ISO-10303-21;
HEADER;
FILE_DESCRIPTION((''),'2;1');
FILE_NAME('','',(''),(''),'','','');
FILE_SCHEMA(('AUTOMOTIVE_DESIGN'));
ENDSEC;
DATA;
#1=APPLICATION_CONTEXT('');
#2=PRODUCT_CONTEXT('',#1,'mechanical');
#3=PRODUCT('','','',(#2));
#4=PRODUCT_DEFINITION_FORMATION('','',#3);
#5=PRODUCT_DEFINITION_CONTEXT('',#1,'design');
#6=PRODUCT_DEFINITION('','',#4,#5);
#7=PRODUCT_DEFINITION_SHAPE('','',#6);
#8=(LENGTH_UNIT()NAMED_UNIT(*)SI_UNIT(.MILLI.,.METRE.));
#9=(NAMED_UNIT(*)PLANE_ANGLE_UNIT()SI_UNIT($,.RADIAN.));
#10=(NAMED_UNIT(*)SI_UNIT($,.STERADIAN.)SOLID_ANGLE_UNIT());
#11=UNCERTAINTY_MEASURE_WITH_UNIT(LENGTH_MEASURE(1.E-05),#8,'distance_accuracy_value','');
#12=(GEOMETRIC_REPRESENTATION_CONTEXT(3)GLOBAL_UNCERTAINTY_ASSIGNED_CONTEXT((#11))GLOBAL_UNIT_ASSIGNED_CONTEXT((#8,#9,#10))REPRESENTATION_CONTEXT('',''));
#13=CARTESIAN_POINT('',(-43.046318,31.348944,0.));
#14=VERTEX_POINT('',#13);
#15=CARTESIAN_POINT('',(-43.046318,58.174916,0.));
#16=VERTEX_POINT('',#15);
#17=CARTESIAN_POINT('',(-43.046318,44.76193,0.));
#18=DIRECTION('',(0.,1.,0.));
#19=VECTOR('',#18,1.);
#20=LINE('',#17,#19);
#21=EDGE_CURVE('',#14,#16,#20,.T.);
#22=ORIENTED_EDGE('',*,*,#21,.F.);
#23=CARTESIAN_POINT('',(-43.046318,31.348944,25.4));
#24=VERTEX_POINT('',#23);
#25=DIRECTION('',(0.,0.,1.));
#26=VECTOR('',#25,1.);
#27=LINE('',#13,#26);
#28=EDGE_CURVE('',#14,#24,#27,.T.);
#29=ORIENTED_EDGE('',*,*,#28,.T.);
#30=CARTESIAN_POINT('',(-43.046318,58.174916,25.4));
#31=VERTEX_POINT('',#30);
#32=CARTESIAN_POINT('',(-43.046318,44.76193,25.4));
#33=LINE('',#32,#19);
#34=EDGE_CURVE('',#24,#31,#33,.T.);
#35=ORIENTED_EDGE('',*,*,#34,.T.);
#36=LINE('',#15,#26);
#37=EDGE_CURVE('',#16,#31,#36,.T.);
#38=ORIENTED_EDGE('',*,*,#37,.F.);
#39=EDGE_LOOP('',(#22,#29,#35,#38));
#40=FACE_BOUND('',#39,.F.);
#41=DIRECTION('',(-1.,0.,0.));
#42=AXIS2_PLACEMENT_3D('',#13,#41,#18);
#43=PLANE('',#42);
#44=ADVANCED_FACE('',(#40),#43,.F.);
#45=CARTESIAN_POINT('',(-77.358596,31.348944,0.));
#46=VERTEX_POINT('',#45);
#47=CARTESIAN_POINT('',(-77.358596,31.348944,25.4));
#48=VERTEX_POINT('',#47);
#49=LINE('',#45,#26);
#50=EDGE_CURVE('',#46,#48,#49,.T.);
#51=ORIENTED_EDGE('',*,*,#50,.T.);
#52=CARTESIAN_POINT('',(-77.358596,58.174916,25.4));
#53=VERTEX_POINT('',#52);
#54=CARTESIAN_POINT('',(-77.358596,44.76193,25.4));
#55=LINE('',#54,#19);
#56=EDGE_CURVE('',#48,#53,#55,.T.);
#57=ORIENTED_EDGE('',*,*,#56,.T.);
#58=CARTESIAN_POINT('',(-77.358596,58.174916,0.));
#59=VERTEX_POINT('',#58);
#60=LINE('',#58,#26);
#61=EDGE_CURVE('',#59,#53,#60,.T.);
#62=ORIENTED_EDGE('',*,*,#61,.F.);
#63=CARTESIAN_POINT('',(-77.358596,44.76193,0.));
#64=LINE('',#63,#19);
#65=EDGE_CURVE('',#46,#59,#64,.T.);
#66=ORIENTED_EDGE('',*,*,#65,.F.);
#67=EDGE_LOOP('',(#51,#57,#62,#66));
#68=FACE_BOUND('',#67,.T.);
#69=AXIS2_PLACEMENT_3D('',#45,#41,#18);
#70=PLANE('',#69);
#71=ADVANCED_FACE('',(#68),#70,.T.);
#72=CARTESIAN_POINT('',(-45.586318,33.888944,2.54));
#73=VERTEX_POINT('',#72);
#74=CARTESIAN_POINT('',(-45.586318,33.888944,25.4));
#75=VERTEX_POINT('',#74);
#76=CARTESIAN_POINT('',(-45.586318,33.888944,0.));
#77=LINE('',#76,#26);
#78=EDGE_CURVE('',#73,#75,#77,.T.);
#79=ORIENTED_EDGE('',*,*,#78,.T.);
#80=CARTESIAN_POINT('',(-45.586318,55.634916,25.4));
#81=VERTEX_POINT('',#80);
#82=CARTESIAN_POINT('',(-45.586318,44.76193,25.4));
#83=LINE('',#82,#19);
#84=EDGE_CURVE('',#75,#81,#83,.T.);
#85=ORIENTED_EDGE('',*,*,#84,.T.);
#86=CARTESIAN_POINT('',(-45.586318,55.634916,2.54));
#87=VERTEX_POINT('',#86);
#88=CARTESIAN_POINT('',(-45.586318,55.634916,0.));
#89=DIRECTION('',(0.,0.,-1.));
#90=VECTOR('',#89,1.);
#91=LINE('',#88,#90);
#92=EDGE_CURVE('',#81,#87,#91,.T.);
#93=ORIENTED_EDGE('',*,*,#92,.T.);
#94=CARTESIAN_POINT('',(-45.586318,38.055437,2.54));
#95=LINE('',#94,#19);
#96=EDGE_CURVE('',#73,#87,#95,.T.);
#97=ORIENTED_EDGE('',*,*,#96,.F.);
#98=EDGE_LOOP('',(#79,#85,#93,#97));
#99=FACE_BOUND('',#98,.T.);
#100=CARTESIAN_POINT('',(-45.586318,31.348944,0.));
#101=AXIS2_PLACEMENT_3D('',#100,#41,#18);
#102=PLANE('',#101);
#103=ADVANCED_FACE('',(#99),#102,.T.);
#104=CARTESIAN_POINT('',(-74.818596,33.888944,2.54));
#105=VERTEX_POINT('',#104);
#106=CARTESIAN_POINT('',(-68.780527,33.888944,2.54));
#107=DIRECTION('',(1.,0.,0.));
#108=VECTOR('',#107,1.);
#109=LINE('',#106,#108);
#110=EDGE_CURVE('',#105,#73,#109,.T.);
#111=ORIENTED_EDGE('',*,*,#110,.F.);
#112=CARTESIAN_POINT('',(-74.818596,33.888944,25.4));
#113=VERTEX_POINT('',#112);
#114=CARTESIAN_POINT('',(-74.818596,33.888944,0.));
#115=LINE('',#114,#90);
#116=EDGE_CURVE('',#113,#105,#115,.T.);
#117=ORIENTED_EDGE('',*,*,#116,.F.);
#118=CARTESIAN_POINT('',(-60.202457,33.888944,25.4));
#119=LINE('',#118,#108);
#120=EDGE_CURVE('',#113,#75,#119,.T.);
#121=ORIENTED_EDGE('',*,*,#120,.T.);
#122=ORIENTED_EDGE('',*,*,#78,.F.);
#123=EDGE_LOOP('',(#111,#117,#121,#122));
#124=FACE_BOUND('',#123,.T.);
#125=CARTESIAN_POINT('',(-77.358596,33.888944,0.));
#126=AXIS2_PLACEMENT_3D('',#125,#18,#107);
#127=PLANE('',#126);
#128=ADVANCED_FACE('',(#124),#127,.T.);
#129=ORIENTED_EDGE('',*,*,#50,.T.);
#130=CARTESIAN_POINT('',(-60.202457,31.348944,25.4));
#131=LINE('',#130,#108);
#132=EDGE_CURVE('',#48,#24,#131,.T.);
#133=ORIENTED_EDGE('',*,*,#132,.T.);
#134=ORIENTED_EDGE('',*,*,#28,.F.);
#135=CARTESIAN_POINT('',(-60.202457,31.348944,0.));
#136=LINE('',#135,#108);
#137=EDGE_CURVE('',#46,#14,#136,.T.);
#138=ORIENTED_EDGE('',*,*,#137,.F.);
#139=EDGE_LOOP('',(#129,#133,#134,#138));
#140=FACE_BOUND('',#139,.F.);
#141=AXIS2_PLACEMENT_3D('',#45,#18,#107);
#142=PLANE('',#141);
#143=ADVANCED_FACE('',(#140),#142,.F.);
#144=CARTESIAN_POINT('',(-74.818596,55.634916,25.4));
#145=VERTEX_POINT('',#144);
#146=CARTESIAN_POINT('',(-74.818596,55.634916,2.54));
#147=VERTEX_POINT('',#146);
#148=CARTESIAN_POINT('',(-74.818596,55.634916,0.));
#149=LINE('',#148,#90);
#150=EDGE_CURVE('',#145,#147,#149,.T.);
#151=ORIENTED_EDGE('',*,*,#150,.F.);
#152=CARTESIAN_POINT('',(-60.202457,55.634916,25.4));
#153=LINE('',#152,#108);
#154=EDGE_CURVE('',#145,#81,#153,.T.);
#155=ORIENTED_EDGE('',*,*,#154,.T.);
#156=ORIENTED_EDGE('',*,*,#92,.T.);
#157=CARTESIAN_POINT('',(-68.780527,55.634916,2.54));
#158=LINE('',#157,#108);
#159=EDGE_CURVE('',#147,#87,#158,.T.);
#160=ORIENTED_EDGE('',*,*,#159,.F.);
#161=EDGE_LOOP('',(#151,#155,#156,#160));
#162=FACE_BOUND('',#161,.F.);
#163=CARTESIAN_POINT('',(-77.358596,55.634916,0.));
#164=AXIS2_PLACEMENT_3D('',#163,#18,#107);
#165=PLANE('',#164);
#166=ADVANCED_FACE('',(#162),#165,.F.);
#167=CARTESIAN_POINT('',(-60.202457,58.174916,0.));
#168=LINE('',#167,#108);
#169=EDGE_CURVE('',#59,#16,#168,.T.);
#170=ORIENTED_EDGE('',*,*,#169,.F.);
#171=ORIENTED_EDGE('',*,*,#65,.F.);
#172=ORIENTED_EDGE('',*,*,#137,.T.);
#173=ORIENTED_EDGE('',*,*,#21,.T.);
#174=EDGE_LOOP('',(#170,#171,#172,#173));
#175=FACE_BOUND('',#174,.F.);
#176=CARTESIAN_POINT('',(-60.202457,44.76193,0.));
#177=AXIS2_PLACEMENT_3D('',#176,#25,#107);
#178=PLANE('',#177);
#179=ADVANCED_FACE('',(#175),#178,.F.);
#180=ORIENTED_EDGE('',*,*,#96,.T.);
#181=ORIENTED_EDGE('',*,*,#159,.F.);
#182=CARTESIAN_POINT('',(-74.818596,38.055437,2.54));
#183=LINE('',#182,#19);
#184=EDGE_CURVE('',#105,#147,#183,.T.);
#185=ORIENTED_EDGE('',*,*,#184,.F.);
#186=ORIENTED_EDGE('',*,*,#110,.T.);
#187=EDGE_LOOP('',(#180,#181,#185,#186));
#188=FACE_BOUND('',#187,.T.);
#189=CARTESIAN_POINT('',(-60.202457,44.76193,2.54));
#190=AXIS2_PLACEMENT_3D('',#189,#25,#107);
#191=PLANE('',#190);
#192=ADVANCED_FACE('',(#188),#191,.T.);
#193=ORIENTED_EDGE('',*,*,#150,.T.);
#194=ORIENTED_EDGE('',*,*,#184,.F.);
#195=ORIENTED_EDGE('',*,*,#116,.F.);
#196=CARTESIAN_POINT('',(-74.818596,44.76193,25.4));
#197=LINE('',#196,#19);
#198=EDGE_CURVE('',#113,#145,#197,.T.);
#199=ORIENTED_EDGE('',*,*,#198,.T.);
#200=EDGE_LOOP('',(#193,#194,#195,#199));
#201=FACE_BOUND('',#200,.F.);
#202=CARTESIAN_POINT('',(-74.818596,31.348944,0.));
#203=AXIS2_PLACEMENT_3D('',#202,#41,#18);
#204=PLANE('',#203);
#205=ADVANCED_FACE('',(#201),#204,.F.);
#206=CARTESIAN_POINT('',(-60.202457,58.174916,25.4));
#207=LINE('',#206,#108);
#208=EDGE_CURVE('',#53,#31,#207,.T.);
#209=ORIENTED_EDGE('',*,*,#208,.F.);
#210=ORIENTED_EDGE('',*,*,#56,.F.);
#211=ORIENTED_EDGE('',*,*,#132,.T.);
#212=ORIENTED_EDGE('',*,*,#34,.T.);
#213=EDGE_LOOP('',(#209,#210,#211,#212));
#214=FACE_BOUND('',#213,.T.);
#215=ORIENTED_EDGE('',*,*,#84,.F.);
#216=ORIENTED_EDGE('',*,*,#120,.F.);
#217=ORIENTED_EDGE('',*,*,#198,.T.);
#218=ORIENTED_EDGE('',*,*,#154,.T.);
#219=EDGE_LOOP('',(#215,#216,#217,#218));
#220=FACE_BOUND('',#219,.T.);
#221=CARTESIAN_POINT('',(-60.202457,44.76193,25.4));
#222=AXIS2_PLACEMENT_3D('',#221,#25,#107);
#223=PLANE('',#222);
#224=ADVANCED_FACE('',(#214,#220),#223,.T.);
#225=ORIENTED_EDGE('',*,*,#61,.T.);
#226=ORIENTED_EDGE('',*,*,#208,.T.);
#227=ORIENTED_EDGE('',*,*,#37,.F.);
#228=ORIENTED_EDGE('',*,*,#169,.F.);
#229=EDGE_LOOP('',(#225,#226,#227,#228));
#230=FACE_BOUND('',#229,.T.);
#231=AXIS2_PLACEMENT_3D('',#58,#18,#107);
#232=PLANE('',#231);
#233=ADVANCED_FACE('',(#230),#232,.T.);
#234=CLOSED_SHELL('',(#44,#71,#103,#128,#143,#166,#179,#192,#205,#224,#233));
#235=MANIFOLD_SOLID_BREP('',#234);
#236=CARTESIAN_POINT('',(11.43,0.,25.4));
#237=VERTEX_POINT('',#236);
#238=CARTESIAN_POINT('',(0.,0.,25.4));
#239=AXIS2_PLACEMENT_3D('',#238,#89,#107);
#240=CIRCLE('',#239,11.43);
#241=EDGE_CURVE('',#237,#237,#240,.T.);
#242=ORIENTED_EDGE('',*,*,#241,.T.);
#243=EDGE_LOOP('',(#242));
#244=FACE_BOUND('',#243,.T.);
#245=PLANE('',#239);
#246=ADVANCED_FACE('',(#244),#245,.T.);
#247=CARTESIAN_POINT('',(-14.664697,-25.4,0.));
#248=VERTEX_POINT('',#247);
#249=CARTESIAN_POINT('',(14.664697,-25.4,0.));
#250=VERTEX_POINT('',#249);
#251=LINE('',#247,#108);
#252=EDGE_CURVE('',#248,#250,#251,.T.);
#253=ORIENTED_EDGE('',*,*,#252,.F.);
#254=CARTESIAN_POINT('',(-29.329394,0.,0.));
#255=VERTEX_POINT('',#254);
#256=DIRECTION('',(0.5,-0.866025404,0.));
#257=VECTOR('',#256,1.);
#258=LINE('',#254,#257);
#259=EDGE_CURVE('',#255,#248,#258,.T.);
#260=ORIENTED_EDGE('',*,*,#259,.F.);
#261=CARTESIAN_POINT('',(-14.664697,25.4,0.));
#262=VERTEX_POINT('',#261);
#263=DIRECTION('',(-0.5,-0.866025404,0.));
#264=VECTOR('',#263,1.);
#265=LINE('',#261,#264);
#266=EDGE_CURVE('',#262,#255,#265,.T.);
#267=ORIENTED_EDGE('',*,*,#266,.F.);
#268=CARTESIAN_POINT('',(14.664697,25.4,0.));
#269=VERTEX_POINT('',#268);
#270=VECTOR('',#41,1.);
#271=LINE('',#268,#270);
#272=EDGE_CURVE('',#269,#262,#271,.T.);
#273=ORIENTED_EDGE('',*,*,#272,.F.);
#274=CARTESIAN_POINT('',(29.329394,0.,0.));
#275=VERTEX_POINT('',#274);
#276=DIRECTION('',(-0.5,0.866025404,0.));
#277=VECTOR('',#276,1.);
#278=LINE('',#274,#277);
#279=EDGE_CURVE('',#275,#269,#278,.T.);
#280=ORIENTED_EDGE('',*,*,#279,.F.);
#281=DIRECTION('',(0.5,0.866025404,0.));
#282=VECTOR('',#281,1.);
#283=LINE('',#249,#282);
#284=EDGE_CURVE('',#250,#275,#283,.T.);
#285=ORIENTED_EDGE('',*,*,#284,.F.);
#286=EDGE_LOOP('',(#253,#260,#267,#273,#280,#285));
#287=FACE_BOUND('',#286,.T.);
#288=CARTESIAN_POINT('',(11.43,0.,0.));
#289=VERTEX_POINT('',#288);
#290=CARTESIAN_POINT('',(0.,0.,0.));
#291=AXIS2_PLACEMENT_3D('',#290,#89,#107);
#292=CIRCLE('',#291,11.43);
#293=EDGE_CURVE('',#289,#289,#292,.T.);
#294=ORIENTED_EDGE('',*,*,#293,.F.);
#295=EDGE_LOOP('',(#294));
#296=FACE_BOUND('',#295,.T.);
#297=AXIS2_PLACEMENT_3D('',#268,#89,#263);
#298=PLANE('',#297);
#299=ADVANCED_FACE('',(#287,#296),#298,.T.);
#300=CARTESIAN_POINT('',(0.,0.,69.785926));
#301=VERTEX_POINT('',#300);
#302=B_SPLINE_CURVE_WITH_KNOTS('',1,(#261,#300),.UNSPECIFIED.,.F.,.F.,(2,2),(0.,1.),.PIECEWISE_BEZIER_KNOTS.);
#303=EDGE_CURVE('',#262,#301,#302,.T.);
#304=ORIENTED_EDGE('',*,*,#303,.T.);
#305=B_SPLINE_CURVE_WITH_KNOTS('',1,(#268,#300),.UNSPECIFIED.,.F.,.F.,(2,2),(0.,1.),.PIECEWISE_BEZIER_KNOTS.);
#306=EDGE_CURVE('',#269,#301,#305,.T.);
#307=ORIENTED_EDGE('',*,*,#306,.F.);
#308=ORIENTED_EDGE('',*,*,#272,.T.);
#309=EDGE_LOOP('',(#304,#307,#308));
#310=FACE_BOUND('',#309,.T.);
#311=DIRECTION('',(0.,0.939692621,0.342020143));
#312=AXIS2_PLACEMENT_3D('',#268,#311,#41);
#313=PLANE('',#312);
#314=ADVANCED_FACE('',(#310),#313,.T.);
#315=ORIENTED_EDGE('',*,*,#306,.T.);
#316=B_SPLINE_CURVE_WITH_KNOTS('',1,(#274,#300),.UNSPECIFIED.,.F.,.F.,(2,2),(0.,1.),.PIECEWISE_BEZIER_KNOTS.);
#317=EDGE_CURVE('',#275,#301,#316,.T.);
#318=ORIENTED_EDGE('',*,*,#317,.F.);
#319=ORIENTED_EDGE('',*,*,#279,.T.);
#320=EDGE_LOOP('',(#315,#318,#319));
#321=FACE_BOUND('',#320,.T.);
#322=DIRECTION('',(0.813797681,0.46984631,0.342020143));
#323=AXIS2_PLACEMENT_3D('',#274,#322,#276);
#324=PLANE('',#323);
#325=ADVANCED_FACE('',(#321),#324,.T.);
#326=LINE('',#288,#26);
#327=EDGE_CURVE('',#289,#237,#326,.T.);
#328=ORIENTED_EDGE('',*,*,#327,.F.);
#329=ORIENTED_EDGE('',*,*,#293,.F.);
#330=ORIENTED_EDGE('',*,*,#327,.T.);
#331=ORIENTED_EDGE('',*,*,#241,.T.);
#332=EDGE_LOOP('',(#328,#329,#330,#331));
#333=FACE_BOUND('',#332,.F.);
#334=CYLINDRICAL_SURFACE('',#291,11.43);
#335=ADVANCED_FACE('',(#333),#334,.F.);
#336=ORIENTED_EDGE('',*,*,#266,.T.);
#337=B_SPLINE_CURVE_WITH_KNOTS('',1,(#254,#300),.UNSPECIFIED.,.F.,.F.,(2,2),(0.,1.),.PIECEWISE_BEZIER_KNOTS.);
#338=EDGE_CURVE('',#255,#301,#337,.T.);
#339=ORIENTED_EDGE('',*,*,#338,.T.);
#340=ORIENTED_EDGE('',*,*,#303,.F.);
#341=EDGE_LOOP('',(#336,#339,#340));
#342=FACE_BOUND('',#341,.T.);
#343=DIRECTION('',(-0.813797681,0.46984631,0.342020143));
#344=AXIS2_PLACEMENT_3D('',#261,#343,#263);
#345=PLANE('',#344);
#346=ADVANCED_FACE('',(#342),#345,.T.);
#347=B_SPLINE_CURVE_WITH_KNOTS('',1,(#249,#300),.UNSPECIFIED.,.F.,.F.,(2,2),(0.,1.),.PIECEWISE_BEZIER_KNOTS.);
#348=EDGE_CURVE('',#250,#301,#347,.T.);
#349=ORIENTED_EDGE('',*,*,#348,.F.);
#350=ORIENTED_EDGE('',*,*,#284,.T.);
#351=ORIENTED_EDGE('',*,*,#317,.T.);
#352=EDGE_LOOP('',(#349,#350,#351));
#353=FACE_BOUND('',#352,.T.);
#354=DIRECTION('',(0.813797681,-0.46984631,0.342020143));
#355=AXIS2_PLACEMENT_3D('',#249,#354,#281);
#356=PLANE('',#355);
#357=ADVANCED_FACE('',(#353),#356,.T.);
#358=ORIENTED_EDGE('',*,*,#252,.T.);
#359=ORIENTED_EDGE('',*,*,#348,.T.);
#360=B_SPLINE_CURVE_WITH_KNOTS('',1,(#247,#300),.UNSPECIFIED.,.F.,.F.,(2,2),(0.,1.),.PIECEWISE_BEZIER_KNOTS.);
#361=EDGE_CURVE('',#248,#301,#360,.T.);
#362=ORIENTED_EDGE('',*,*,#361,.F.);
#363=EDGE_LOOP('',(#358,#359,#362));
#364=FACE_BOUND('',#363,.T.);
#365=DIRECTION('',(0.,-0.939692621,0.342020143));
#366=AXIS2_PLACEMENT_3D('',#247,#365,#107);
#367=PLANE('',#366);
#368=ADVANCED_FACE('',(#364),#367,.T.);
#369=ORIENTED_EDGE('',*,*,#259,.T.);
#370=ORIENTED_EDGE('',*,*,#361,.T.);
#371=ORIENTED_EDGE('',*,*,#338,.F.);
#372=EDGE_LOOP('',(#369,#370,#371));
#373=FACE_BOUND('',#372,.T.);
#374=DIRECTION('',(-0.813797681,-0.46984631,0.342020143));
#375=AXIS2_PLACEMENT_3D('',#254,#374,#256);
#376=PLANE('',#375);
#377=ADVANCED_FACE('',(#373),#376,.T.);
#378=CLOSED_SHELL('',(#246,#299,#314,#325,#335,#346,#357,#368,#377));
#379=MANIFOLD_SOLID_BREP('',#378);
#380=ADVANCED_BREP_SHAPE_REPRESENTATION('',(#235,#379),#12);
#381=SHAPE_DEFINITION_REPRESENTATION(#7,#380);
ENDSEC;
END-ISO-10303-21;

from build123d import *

# Parameters (mm, degrees)
F0_W     = 50.8
F0_H     = 50.8
F1_DEPTH = 53.975
F5_R     = 11.43
F6_DEPTH = 25.4
F7_W     = 34.3122780323
F7_H     = 26.8259719014
F8_DEPTH = 25.4
F9_T     = -2.54


# Not quite as in the source:
# - an extrude whose draft closes it to a point is written as a loft to that point


with BuildPart() as f1:
    # F0 (on Front) → F1 (new body, symmetric)
    with BuildSketch(Plane.XZ):
        with Locations((-25.4, 25.4)):
            Rectangle(F0_W, F0_H)
    extrude(amount=F1_DEPTH, both=True)


with BuildPart() as f4:
    # F3 (on Top) → F4 section 0
    with BuildSketch(Plane.XY, mode=Mode.PRIVATE) as f4_s0:
        Polygon((14.6646968374, 25.4), (-14.6646968374, 25.4), (-29.3293936748, 0), (-14.6646968374, -25.4), (14.6646968374, -25.4), (29.3293936748, 0), align=None)
    loft([f4_s0.sketch, Vertex(0, 0, 69.7859264541)], ruled=True)

    # F5 (on face) → F6 (cut)
    with BuildSketch(Plane(origin=(0, 0, 0), x_dir=(1, 0, 0), z_dir=(0, 0, -1))):
        Circle(F5_R)
    extrude(amount=-F6_DEPTH, mode=Mode.SUBTRACT)


with BuildPart() as f8:
    # F7 (on Top) → F8 (new body)
    with BuildSketch(Plane.XY):
        with Locations((-60.2024570107, 44.761929661)):
            Rectangle(F7_W, F7_H)
    extrude(amount=F8_DEPTH)

    # F9
    f9_openings = [f8.faces().sort_by_distance(p)[0] for p in [
        (-60.202457, 44.76193, 25.4),
    ]]
    offset(amount=F9_T, openings=f9_openings)


solid = Compound([f4.part, f8.part])
